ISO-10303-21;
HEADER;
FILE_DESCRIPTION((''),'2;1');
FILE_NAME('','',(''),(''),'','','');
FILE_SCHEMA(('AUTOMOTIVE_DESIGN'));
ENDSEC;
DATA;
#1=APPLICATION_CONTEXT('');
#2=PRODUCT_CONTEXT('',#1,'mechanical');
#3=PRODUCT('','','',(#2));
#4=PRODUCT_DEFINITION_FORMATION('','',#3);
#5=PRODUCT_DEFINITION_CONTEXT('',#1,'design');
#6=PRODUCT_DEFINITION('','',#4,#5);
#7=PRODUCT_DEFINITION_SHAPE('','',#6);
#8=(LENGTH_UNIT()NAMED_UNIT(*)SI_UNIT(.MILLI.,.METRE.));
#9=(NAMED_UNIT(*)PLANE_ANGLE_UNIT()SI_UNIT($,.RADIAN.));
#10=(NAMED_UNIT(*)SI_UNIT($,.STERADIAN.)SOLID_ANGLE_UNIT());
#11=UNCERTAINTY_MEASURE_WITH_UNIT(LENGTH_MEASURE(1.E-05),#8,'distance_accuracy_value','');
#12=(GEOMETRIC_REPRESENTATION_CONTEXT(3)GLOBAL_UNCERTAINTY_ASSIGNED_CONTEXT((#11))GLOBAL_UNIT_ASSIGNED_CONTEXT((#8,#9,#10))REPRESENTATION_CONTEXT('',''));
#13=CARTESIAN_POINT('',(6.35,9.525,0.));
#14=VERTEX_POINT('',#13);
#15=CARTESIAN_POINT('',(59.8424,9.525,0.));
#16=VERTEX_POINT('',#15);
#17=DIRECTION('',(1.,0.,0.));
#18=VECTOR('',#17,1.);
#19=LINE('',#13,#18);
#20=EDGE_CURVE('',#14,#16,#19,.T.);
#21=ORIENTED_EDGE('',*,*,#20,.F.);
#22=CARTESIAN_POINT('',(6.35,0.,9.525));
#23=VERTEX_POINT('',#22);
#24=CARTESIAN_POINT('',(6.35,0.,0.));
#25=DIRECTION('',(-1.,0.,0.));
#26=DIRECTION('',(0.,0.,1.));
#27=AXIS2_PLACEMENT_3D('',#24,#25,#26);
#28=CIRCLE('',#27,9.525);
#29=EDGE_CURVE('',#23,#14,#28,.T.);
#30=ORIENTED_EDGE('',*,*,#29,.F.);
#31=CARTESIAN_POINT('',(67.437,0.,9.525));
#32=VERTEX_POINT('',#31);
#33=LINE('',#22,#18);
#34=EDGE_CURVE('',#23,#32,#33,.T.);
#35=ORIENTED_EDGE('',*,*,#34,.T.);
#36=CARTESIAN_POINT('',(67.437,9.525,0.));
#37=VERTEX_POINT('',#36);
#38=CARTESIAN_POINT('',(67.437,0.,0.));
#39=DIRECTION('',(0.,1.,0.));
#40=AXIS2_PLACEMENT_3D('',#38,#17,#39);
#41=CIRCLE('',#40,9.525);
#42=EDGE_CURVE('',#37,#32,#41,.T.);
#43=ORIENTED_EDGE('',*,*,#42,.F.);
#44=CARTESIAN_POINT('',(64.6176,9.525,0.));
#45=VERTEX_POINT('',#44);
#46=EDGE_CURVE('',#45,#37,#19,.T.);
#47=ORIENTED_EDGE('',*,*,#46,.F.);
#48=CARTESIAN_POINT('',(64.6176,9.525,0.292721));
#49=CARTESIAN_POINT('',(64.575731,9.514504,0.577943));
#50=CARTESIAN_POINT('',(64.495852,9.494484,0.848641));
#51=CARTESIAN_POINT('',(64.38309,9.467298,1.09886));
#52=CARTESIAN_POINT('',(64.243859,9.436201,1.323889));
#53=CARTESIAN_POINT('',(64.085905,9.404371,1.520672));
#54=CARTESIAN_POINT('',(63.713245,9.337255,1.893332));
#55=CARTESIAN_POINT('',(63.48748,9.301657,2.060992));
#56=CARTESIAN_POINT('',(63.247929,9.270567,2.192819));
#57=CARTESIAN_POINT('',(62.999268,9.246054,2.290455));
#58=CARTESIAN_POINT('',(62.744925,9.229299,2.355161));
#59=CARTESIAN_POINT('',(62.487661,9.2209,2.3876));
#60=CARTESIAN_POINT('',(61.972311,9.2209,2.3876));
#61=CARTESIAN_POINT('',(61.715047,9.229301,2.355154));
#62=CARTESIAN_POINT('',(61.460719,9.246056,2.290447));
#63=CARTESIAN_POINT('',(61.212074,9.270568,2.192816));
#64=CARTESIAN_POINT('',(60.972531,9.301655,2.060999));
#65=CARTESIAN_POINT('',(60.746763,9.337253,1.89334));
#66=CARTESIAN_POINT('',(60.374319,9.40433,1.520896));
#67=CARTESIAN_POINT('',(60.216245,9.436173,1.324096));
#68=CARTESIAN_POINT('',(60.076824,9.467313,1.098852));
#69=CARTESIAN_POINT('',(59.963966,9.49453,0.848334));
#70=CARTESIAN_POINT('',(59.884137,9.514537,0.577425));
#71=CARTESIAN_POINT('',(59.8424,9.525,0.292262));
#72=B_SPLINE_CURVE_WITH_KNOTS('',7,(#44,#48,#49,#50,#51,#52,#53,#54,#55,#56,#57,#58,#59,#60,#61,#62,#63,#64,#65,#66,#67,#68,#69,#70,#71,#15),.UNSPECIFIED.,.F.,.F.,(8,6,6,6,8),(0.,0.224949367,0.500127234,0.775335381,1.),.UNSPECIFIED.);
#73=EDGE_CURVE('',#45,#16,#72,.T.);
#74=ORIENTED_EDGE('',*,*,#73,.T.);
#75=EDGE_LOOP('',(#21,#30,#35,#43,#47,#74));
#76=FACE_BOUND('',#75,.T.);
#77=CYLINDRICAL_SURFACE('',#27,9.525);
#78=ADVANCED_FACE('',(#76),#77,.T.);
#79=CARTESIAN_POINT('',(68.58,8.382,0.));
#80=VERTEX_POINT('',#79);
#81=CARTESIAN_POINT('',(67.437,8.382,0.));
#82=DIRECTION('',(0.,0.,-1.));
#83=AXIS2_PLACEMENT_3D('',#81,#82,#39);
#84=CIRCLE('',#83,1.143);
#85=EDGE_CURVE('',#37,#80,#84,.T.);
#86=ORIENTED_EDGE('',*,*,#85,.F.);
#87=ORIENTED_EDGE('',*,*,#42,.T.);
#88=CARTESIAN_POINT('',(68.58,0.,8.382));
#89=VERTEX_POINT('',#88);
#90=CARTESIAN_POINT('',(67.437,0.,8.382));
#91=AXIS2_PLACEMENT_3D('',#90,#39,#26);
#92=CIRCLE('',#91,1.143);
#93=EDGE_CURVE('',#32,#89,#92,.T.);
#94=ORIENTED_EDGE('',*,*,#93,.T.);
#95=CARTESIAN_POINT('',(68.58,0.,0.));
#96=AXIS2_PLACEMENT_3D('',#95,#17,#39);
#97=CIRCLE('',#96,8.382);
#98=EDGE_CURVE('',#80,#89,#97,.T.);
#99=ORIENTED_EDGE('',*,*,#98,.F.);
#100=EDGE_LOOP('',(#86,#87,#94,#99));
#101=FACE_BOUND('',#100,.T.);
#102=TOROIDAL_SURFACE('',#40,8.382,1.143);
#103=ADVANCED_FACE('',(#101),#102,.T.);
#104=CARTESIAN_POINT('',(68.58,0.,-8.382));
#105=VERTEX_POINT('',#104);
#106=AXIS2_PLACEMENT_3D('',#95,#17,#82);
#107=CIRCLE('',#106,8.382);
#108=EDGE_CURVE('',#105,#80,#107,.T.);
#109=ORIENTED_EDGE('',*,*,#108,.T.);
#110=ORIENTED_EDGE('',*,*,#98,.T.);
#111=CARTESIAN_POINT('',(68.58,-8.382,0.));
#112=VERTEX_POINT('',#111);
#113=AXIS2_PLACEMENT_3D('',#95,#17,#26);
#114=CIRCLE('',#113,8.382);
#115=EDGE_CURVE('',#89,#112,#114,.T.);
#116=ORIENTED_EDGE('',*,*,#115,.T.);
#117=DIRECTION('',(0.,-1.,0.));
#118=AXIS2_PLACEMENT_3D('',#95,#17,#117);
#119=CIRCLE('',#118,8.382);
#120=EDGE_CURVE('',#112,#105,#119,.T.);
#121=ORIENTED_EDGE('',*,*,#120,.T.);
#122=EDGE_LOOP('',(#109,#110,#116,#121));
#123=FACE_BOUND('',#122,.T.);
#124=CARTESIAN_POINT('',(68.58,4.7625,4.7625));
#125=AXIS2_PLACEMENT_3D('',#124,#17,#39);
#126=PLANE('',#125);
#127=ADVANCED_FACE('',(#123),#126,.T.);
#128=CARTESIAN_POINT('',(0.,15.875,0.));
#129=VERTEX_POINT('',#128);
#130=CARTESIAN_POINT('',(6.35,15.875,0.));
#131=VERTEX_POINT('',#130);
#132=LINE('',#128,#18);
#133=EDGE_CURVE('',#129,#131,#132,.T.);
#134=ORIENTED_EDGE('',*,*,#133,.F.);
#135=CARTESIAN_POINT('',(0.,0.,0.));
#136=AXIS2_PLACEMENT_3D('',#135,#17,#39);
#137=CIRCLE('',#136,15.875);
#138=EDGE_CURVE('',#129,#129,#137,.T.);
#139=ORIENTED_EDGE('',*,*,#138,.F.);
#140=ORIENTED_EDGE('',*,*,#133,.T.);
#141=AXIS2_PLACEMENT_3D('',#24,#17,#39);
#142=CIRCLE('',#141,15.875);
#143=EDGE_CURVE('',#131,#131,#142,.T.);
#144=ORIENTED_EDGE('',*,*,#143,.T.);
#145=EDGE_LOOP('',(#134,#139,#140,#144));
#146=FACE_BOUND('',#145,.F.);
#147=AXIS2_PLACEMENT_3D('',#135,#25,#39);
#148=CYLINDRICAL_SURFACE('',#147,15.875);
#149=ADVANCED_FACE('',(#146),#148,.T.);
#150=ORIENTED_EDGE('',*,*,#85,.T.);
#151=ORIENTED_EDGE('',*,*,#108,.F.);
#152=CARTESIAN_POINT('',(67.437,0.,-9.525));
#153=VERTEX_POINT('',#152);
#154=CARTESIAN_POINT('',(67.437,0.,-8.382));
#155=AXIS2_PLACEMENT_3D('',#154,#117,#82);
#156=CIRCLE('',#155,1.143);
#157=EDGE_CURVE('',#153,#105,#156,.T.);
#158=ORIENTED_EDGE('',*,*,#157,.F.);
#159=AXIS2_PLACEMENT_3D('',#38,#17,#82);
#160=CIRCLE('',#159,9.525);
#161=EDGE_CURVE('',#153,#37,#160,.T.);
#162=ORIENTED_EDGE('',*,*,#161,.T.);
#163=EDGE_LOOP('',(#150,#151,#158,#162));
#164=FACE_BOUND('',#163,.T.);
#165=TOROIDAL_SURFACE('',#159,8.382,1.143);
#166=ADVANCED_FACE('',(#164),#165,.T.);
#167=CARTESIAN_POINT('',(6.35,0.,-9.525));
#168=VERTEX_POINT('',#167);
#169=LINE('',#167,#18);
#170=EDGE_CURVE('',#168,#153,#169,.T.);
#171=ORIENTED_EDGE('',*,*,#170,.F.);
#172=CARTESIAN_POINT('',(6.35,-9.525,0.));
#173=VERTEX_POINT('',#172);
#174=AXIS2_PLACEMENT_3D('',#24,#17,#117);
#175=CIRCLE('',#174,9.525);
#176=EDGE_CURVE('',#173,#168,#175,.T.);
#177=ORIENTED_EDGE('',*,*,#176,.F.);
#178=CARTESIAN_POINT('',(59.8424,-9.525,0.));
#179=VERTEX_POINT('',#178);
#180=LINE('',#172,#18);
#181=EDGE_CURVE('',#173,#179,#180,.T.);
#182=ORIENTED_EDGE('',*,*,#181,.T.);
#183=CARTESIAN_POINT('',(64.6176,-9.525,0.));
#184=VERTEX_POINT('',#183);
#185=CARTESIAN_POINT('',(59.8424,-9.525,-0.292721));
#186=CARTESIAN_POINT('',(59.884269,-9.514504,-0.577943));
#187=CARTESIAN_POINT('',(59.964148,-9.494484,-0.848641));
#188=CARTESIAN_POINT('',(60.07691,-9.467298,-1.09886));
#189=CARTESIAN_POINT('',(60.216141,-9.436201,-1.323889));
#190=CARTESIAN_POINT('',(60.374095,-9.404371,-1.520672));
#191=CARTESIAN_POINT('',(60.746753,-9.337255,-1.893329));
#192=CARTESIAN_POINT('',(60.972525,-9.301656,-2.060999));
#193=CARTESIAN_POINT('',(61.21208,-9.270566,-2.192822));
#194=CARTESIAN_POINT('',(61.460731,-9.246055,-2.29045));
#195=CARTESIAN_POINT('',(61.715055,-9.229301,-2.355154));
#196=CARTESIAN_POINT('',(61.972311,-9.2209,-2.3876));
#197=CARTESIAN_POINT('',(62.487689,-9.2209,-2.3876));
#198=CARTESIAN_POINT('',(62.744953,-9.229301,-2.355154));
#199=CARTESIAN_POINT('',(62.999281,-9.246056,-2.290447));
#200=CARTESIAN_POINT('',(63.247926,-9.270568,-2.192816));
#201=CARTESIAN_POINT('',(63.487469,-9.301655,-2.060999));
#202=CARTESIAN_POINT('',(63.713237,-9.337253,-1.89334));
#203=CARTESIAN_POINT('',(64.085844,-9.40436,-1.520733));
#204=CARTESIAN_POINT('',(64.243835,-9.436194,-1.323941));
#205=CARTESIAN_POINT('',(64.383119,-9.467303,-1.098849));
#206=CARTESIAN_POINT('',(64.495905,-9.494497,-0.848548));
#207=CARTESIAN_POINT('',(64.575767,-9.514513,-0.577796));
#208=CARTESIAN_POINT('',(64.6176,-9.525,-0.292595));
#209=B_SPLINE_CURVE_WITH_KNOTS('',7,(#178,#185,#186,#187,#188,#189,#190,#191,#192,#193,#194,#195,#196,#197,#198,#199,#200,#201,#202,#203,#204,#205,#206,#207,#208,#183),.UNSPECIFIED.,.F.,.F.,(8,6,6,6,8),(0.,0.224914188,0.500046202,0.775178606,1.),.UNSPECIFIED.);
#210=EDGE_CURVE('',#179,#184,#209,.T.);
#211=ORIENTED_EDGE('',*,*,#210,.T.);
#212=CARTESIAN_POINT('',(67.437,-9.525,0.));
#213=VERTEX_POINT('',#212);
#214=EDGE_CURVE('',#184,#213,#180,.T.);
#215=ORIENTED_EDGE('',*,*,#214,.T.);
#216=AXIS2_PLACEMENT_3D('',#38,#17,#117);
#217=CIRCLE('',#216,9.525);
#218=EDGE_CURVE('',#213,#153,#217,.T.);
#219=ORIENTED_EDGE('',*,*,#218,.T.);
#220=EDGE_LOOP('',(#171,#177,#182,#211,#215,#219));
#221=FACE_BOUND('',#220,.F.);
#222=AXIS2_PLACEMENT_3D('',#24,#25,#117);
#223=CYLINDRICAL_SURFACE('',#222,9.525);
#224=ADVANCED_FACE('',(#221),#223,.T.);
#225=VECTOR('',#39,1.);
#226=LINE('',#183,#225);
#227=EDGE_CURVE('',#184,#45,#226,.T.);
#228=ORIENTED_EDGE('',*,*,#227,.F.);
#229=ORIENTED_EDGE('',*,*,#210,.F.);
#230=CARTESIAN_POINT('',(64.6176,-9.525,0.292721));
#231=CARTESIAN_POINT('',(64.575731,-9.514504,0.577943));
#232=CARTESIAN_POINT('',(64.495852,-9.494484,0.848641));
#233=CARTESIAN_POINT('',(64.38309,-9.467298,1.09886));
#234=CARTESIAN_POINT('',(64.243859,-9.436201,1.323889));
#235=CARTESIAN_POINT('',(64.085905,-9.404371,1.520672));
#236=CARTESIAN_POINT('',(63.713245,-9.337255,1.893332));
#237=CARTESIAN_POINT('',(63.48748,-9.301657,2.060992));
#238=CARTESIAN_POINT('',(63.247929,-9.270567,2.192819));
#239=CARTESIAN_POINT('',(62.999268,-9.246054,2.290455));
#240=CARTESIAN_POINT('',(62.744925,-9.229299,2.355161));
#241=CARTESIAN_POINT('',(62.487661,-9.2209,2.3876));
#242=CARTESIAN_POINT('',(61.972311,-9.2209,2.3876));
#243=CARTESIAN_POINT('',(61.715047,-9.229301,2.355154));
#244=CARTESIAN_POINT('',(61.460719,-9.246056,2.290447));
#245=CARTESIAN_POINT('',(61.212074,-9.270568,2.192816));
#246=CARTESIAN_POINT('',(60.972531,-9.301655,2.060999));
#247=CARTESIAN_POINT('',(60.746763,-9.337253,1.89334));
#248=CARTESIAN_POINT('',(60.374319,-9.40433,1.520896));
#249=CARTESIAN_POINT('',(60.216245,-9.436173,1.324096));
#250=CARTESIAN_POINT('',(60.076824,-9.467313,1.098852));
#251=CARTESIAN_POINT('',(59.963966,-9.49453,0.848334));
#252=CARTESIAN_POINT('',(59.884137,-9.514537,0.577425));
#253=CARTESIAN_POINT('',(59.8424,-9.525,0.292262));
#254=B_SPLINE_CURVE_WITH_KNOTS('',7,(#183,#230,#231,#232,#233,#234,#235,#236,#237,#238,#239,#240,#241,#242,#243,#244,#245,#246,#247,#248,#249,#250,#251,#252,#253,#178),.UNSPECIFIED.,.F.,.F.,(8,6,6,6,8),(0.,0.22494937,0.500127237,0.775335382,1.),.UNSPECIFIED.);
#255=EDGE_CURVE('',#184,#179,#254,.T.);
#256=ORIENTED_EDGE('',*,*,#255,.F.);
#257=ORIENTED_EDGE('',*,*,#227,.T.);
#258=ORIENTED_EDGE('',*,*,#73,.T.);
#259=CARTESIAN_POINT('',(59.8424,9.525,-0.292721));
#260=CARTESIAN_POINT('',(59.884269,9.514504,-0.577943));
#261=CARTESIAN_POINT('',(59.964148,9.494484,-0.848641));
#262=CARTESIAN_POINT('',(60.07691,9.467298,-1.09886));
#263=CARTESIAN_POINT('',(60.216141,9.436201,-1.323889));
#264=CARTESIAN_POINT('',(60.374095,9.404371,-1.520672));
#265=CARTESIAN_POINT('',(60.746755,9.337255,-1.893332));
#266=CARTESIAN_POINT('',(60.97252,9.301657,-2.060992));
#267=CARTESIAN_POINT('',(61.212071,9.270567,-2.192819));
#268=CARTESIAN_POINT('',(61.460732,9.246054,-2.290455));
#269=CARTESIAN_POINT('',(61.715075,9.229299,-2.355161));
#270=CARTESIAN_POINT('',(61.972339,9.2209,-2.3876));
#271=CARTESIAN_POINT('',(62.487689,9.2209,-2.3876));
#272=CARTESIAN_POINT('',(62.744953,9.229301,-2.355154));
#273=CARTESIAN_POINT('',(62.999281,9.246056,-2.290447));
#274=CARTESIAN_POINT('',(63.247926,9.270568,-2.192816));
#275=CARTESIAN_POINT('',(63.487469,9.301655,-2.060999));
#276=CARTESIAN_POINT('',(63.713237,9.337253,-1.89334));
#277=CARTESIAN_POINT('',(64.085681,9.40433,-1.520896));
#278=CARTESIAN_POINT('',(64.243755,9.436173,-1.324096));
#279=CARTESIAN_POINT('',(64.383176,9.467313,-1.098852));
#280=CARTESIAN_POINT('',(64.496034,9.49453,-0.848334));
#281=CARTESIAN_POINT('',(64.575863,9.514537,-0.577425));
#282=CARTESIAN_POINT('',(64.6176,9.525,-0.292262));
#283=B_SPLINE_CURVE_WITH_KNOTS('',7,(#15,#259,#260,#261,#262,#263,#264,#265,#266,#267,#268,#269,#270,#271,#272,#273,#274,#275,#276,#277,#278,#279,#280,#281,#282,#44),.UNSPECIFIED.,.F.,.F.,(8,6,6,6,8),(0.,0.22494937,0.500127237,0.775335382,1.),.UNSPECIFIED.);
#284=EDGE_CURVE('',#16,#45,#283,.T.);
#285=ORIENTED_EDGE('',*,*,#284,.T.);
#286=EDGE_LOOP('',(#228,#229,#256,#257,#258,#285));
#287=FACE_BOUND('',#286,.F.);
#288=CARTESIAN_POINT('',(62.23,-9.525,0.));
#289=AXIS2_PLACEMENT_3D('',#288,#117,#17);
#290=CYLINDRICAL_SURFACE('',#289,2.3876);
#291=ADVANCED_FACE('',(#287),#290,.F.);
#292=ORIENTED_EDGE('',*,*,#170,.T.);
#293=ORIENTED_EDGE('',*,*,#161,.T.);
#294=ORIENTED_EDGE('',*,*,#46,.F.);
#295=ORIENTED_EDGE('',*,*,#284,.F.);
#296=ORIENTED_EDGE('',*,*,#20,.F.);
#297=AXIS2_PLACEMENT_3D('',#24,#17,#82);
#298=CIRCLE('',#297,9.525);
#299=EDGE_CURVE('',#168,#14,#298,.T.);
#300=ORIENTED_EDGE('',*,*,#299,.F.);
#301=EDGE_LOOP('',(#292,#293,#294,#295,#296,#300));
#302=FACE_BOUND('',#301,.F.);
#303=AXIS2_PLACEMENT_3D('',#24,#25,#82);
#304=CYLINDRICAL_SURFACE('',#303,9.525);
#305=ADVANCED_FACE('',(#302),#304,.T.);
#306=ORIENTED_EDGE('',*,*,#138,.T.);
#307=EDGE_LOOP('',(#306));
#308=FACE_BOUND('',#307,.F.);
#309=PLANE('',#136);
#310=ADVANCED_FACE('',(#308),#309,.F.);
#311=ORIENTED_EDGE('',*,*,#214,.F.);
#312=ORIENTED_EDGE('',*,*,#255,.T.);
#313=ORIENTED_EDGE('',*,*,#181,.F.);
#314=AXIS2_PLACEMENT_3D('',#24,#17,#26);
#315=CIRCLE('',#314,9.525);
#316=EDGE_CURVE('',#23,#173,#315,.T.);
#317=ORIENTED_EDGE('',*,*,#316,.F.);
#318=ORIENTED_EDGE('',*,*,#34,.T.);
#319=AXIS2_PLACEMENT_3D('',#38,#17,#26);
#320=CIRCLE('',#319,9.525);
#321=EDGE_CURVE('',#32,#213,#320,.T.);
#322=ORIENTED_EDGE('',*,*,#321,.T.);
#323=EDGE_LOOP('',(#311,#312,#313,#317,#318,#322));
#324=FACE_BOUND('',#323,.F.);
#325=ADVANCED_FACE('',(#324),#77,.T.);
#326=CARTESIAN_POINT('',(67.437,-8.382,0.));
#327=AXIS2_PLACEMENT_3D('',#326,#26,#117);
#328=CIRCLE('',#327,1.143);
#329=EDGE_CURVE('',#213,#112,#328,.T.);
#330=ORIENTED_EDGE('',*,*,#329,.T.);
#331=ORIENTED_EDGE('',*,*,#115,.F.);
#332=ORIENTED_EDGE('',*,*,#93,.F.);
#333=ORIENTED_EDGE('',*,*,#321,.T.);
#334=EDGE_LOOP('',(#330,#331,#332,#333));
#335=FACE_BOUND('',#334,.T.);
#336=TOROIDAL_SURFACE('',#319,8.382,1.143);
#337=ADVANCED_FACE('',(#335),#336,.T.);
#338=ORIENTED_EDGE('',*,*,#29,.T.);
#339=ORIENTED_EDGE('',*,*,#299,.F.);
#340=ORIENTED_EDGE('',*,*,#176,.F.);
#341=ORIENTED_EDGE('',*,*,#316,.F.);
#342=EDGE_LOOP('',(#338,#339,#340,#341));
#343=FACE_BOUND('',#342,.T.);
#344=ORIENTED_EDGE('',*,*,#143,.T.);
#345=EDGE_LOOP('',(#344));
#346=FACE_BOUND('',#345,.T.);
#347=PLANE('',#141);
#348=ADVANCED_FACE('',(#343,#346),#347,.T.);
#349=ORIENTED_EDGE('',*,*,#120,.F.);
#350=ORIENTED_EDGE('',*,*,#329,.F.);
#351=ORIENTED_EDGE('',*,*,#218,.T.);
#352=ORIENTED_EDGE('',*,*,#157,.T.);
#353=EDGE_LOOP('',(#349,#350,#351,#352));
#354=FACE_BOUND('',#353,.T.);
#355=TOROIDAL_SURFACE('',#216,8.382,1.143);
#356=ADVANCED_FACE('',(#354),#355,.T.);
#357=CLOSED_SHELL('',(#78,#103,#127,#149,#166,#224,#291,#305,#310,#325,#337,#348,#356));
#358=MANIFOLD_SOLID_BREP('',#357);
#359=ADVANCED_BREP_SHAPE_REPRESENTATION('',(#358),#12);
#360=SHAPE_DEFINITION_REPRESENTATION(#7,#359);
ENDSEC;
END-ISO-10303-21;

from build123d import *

# Parameters (mm, degrees)
F0_R        = 15.875
F1_DEPTH    = 6.35
F2_W        = 9.525
F2_H        = 9.525
F3_DEPTH    = 62.23
F4_R        = 2.3876
F5_DEPTH    = 25.4
F6_T1_DEPTH = 62.23
F7_R        = 1.143


# Not quite as in the source:
# - a fillet or chamfer that OpenCascade refuses, or shapes differently, is made with other operations: its cross-section is extruded or revolved along the edge and cut away or added


with BuildPart() as f1:
    # F0 (on Right) → F1 (new body)
    with BuildSketch(Plane.YZ):
        Circle(F0_R)
    extrude(amount=F1_DEPTH)

    # F2 (on face) → F3 (join)
    with BuildSketch(Plane.YZ.offset(6.35)):
        with Locations((4.7625, 4.7625)):
            Rectangle(F2_W, F2_H)
        with Locations((-4.7625, -4.7625)):
            Rectangle(F2_W, F2_H)
        with Locations((-4.7625, 4.7625)):
            Rectangle(F2_W, F2_H)
        with Locations((4.7625, -4.7625)):
            Rectangle(F2_W, F2_H)
    extrude(amount=F3_DEPTH)

    # F4 (on face) → F5 (cut)
    with BuildSketch(Plane.XZ.offset(9.525)):
        with Locations((62.23, 0)):
            Circle(F4_R)
    extrude(amount=-F5_DEPTH, mode=Mode.SUBTRACT)

    # F6: fillet of radius 9.525 on 4 edges, made by hand

    # F6_s2 → F6_t1 (cut)
    with BuildSketch(Plane.YZ.offset(6.35)):
        with BuildLine():
            ThreePointArc((0, 9.525), (-6.7351920908, 6.7351920908), (-9.525, 0))
            Line((-9.525, 0), (-9.7155, 0))
            Line((-9.7155, 0), (-9.7155, 9.7155))
            Line((-9.7155, 9.7155), (0, 9.7155))
            Line((0, 9.7155), (0, 9.525))
        make_face()
        with BuildLine():
            ThreePointArc((0, 9.525), (6.7351920908, 6.7351920908), (9.525, 0))
            Line((9.525, 0), (9.7155, 0))
            Line((9.7155, 0), (9.7155, 9.7155))
            Line((9.7155, 9.7155), (0, 9.7155))
            Line((0, 9.7155), (0, 9.525))
        make_face()
        with BuildLine():
            ThreePointArc((-9.525, 0), (-6.7351920908, -6.7351920908), (0, -9.525))
            Line((0, -9.525), (0, -9.7155))
            Line((0, -9.7155), (-9.7155, -9.7155))
            Line((-9.7155, -9.7155), (-9.7155, 0))
            Line((-9.7155, 0), (-9.525, 0))
        make_face()
        with BuildLine():
            ThreePointArc((0, -9.525), (6.7351920908, -6.7351920908), (9.525, 0))
            Line((9.525, 0), (9.7155, 0))
            Line((9.7155, 0), (9.7155, -9.7155))
            Line((9.7155, -9.7155), (0, -9.7155))
            Line((0, -9.7155), (0, -9.525))
        make_face()
    extrude(amount=F6_T1_DEPTH, mode=Mode.SUBTRACT)

    # F7
    f7_edges = [f1.edges().sort_by_distance(p)[0] for p in [
        (68.58, -6.735192, -6.735192),
    ]]
    fillet(f7_edges, radius=F7_R)


solid = f1.part
